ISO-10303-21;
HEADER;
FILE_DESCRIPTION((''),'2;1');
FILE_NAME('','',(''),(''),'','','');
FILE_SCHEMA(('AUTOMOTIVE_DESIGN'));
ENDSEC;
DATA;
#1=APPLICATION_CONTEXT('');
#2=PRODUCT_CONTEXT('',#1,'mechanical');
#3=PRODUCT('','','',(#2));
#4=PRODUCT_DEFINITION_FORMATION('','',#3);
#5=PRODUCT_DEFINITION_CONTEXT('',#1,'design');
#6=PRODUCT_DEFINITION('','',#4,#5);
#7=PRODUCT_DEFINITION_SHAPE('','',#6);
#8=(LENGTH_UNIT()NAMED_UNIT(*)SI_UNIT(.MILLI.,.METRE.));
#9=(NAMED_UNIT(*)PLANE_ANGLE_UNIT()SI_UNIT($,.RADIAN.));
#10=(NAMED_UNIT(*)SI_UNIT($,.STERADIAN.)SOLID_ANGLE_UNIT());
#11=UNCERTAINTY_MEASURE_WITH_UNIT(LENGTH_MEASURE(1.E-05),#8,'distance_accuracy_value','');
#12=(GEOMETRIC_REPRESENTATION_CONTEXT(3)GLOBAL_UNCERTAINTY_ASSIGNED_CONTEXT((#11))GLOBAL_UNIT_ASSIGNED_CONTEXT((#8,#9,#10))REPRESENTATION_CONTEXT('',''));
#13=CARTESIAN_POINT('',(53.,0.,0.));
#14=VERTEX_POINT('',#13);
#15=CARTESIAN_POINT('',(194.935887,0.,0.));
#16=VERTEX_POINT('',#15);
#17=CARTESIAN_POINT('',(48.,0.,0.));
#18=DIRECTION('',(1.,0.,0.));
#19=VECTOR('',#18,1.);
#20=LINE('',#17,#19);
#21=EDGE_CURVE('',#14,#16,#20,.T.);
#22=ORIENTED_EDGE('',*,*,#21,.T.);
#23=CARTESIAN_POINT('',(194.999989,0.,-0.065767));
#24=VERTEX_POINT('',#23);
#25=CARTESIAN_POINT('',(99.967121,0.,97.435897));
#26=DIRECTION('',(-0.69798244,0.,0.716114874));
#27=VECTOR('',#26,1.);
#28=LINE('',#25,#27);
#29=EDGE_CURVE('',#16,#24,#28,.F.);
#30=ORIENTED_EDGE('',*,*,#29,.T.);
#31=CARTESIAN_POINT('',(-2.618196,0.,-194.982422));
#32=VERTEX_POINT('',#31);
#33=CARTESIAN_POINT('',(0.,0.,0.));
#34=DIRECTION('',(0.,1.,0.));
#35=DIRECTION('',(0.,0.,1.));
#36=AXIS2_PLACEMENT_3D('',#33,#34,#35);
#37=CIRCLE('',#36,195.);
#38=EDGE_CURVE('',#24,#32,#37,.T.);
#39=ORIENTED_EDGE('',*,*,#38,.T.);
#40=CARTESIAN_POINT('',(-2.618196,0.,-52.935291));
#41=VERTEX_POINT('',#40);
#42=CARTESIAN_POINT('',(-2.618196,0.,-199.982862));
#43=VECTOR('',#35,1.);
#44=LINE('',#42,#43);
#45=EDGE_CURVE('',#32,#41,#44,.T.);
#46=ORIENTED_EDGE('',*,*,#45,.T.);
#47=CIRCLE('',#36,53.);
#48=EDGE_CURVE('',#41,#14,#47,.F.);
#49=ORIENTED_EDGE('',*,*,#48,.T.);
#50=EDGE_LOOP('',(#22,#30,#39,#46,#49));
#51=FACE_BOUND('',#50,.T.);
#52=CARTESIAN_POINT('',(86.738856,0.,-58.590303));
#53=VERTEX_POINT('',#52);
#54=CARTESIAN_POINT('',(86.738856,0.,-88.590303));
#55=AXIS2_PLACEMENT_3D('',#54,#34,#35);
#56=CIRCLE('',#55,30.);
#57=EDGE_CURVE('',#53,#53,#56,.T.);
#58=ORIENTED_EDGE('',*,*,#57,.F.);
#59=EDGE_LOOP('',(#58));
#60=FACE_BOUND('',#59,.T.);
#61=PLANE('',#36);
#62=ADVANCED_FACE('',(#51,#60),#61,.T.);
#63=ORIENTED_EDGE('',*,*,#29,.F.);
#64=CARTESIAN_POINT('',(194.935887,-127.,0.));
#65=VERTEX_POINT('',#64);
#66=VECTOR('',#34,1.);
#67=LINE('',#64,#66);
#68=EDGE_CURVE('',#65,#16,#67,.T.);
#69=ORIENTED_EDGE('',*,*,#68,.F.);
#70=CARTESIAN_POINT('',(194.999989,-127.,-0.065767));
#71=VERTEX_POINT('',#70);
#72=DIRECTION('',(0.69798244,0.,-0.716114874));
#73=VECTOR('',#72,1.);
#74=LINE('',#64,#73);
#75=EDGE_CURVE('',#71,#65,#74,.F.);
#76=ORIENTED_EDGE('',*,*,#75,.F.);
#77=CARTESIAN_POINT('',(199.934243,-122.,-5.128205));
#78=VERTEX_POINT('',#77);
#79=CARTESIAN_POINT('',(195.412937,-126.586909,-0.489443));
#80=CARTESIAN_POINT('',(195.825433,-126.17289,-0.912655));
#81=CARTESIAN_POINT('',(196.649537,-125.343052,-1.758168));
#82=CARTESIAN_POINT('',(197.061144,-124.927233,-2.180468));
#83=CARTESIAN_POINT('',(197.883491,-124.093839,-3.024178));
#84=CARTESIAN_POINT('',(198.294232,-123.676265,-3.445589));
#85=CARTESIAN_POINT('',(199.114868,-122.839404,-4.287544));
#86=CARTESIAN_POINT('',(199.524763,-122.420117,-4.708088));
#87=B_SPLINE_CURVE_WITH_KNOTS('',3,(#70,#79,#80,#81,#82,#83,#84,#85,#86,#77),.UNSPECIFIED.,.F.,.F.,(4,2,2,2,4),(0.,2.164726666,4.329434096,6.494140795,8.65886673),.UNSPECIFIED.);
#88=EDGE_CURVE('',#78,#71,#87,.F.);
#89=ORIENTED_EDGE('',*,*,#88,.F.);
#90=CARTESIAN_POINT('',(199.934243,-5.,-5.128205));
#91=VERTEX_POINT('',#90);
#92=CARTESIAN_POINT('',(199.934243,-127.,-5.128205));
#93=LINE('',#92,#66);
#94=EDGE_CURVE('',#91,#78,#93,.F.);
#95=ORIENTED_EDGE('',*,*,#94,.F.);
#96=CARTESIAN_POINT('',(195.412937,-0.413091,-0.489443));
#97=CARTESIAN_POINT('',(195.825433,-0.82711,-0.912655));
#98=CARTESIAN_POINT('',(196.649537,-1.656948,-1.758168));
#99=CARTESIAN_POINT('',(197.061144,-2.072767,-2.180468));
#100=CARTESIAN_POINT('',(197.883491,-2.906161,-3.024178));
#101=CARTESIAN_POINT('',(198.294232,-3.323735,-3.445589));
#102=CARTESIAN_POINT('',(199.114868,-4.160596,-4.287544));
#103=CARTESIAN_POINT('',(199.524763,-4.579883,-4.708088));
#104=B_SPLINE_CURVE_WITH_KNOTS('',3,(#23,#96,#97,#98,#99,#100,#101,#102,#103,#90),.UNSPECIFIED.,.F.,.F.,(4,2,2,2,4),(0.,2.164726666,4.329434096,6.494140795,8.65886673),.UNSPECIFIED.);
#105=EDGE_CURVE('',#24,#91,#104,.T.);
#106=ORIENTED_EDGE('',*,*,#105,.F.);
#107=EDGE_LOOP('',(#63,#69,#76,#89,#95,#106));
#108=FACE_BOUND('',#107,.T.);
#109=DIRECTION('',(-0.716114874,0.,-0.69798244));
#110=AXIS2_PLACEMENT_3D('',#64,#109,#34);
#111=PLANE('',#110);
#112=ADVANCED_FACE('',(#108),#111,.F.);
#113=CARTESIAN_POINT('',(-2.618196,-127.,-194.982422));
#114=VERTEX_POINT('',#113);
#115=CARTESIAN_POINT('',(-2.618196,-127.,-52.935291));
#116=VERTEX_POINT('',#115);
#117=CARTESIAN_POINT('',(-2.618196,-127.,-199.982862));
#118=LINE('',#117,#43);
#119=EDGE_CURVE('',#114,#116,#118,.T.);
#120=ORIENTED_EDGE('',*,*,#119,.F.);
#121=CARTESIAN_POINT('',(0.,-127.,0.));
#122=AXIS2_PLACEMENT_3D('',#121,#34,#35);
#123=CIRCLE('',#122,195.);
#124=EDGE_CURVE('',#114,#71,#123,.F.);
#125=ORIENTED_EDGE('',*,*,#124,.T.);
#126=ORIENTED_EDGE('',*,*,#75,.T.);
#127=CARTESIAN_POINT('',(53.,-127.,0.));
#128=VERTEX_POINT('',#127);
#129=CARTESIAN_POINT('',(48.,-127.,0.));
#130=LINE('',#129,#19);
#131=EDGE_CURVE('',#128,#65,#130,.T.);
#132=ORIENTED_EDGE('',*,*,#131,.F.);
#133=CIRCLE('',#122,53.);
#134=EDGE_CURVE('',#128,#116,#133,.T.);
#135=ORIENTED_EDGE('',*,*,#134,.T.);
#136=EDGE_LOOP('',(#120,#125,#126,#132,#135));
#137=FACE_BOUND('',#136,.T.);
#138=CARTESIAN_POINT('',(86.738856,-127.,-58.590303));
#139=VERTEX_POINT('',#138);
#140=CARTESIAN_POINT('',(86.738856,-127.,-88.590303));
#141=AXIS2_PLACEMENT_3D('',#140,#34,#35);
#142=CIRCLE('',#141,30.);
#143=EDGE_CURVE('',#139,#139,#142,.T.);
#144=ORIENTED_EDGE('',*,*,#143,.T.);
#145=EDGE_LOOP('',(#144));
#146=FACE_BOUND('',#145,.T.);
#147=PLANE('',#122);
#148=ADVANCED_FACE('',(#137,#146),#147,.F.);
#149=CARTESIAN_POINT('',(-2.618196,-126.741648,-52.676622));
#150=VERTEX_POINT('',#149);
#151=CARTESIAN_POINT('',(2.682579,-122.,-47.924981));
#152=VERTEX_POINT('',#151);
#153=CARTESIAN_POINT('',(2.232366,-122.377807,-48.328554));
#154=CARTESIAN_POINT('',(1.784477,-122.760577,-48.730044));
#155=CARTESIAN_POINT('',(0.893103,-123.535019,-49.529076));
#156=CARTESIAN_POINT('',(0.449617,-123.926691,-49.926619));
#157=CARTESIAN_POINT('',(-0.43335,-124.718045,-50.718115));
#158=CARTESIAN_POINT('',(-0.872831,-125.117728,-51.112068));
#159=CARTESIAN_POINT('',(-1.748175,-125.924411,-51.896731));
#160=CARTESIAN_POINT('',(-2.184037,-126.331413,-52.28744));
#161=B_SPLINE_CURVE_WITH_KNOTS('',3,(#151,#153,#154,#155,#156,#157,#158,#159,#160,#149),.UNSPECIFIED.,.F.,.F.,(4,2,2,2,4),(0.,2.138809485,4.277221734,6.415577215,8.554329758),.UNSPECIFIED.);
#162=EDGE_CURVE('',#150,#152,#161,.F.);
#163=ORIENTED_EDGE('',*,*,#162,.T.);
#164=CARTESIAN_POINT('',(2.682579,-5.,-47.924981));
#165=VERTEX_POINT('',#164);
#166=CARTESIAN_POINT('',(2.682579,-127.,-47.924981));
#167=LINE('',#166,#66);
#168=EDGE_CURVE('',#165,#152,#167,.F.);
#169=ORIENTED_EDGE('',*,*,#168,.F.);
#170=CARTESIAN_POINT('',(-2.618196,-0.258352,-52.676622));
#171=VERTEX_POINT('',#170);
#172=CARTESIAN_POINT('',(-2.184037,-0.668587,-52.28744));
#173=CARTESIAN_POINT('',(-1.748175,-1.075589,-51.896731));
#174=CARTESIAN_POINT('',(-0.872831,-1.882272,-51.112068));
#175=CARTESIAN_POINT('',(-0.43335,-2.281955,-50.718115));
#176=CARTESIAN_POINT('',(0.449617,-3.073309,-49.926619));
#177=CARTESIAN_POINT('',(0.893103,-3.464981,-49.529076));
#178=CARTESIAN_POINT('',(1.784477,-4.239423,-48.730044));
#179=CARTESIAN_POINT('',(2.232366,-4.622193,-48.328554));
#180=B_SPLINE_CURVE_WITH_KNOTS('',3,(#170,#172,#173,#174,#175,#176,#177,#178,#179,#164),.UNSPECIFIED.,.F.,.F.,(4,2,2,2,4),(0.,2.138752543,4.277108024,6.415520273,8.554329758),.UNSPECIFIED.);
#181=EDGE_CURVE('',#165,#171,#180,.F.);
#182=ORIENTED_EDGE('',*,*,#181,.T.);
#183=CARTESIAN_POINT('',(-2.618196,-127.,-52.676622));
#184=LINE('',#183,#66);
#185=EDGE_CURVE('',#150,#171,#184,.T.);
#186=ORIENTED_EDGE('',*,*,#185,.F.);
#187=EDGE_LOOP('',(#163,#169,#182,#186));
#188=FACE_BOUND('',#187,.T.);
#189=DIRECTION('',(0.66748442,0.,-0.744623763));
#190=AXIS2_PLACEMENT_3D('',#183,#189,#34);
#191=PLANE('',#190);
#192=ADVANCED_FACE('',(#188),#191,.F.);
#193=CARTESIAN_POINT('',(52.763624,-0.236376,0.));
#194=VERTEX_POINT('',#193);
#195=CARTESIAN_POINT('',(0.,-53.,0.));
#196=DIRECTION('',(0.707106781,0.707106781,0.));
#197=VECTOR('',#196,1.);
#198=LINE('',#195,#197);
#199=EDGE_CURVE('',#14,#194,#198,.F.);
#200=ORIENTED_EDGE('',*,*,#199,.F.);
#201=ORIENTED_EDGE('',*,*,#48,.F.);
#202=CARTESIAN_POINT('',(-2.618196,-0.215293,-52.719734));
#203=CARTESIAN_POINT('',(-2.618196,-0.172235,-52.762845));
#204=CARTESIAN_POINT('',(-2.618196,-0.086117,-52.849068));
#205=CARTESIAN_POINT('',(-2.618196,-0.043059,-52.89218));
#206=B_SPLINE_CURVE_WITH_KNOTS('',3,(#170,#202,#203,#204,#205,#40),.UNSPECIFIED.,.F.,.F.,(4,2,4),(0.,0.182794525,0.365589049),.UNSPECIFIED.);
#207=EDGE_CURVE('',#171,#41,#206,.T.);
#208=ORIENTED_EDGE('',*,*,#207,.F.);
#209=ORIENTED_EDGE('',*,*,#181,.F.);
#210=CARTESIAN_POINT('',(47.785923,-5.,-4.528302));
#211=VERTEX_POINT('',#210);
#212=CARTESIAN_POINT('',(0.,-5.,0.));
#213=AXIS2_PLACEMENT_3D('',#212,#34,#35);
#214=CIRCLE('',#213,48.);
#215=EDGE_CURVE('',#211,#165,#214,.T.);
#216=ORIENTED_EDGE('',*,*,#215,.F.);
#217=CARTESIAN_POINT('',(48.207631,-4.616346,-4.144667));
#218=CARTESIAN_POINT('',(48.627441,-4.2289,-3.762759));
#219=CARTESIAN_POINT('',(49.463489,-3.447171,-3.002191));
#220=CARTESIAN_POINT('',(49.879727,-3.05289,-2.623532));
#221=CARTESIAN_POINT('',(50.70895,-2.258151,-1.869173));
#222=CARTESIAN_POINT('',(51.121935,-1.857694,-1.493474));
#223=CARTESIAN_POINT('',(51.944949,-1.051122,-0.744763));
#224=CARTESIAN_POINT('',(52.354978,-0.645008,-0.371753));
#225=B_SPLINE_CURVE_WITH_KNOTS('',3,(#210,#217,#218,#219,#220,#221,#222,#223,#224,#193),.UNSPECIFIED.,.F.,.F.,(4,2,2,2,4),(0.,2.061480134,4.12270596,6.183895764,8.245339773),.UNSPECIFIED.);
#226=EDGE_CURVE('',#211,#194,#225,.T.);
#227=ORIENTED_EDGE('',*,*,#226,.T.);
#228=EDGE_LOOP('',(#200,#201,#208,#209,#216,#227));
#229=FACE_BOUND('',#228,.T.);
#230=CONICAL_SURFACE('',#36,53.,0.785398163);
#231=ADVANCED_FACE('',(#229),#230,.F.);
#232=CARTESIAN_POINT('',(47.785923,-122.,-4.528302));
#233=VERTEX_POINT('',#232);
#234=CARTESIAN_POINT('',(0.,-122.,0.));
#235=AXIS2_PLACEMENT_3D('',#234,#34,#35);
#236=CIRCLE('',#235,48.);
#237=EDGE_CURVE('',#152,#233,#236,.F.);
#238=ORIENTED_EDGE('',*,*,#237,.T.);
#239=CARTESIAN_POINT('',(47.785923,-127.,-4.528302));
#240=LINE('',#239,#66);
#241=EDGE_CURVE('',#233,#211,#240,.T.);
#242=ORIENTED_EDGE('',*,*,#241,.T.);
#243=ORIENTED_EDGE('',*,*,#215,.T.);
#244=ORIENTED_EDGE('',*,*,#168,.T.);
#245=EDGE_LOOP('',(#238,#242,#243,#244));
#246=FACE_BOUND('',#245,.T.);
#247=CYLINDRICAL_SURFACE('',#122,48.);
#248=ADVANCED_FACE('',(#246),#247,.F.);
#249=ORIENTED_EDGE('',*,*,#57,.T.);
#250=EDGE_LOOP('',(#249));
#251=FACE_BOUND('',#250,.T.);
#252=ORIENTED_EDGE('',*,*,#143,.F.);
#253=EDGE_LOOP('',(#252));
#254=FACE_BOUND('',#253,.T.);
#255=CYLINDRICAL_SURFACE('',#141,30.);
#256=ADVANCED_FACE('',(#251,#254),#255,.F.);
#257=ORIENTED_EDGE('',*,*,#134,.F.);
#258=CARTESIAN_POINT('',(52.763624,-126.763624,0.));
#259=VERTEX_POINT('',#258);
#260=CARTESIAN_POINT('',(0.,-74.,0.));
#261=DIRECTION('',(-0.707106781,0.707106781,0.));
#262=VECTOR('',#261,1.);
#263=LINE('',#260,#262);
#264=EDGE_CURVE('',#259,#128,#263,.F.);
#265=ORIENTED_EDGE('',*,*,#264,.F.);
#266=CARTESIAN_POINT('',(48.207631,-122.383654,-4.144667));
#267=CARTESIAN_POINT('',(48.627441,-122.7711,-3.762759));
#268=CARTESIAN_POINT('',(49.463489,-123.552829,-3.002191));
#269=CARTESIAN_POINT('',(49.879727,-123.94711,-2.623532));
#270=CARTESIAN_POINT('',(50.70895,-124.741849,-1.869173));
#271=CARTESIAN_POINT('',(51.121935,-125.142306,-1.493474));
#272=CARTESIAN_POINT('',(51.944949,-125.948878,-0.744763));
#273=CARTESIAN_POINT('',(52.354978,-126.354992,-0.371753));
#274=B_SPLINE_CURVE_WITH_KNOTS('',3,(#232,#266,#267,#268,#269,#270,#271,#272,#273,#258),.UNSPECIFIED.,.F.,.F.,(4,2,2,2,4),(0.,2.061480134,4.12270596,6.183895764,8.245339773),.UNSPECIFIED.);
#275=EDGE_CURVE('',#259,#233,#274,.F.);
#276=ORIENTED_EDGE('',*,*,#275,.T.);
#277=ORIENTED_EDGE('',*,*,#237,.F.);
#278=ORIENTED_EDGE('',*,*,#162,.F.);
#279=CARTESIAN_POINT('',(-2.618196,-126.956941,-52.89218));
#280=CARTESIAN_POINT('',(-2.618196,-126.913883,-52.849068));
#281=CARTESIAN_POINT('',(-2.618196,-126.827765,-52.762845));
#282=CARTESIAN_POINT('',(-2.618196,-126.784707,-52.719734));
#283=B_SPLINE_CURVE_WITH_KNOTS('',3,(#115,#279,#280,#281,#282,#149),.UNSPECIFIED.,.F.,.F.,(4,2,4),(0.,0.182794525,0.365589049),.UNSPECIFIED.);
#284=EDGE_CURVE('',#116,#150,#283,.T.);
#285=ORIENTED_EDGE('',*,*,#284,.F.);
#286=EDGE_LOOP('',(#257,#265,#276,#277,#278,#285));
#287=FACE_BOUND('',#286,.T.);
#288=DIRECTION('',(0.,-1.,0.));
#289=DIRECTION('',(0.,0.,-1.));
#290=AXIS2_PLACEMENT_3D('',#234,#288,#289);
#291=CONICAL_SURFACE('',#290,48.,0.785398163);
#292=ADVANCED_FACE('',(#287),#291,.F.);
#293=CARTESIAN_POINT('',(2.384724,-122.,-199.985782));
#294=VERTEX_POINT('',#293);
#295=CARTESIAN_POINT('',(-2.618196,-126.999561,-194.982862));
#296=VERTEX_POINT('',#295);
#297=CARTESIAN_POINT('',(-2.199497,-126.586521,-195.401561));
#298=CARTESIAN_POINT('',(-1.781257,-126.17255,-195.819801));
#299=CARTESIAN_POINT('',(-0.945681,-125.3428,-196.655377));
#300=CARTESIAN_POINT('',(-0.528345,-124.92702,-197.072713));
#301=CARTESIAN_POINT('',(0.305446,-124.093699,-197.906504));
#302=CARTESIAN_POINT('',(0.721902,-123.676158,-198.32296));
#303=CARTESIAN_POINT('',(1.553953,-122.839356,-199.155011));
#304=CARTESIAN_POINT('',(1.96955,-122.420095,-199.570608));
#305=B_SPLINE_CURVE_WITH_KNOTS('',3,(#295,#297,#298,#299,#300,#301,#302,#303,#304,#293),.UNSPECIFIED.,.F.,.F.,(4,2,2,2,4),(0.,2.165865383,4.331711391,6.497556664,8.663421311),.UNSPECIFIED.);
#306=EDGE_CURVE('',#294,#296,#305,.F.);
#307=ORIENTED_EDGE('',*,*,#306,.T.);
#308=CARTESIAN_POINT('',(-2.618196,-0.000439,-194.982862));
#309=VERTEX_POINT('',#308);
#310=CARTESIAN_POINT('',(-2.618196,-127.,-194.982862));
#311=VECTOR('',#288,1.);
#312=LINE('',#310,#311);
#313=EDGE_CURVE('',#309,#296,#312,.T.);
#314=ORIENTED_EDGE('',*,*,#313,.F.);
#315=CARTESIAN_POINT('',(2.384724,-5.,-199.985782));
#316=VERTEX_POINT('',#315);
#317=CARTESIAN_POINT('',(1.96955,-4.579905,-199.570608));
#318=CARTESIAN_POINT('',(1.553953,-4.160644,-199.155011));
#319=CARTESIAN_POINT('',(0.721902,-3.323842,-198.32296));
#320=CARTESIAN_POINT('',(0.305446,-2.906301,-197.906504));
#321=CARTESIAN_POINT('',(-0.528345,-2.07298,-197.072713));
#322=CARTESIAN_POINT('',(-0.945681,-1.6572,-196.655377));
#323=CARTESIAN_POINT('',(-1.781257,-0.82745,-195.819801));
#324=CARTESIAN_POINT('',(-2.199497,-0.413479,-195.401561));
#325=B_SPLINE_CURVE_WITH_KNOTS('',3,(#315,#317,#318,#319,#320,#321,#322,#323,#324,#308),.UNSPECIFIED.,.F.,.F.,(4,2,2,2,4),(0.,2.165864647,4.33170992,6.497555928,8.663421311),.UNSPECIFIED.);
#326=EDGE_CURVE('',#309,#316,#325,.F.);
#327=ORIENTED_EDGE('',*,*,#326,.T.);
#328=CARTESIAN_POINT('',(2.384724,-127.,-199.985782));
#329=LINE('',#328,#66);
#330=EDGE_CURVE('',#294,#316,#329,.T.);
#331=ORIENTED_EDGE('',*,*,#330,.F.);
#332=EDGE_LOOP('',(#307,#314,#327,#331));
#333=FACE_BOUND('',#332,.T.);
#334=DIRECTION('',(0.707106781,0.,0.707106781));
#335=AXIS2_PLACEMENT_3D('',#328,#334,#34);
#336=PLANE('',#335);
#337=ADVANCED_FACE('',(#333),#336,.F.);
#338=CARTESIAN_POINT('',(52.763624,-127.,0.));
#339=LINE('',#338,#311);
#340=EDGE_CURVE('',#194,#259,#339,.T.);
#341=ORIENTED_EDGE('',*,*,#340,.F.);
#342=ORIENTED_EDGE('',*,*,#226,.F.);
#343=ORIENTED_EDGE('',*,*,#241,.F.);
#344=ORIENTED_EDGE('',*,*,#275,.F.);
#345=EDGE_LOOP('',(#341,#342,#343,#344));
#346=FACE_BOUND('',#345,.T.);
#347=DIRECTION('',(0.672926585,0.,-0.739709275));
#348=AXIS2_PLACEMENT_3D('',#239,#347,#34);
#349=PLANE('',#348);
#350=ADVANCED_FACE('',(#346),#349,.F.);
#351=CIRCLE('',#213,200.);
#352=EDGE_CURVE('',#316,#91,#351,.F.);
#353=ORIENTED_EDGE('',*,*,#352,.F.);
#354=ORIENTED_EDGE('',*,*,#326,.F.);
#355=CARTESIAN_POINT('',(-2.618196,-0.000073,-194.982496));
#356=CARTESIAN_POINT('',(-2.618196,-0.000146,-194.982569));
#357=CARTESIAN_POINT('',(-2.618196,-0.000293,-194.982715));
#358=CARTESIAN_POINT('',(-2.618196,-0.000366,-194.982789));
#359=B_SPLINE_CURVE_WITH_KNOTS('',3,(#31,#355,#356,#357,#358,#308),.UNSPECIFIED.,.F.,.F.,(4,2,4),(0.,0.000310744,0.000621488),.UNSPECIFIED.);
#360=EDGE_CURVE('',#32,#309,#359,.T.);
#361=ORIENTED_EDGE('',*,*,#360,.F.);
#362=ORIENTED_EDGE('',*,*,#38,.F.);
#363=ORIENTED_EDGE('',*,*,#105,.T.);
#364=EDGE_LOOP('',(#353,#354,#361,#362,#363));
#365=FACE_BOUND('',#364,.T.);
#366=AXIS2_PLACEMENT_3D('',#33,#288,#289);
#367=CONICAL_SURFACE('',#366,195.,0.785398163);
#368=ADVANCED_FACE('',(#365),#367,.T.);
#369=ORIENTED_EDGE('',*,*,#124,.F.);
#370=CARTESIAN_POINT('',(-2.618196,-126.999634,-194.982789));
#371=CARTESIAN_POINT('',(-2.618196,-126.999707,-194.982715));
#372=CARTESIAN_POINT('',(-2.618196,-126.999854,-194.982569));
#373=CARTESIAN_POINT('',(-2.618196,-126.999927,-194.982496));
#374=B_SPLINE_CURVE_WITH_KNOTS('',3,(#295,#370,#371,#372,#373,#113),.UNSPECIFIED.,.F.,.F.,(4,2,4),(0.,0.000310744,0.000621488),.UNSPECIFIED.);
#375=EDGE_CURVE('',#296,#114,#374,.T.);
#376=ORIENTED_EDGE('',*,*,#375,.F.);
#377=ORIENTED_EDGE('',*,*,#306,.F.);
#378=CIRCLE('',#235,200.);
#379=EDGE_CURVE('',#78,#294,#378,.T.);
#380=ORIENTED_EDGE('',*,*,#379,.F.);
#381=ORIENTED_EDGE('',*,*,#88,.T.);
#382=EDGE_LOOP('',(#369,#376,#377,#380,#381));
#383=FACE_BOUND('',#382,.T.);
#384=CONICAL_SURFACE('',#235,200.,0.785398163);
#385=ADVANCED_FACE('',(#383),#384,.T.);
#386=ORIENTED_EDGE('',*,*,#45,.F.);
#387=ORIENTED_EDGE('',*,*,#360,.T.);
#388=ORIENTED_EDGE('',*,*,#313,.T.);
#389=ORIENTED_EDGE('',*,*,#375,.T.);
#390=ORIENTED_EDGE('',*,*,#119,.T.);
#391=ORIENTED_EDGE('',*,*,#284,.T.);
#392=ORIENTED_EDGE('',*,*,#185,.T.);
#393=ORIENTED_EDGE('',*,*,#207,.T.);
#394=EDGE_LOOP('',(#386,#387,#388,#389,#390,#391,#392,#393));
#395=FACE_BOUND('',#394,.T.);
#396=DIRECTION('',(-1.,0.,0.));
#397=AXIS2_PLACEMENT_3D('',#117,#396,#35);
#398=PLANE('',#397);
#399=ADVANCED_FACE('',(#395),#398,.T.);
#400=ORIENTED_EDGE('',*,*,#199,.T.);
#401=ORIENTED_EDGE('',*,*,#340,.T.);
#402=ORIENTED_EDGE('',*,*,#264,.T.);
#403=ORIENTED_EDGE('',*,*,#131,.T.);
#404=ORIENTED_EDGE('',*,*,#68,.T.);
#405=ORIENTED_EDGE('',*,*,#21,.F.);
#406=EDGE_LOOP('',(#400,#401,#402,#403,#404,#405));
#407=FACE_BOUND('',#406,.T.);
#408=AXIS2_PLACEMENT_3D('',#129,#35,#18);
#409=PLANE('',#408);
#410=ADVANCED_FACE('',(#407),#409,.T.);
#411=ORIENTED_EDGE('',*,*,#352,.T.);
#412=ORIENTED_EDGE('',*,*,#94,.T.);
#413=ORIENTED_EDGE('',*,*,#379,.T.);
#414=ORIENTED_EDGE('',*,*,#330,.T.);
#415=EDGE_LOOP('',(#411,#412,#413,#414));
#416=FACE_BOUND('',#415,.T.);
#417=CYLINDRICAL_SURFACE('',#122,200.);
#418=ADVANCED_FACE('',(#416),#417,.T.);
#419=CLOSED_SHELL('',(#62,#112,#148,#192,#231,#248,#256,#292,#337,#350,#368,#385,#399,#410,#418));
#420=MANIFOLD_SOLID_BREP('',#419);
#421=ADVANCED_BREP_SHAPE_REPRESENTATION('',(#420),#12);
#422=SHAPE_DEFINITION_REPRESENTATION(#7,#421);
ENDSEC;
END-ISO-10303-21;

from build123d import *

# Parameters (mm, degrees)
BOSS_EXTRUDE1_DEPTH = 127
SKETCH2_R           = 30
CUT_EXTRUDE1_DEPTH  = 311.046770665
CHAMFER2_START      = -127
CHAMFER2_DEPTH      = 127


with BuildPart() as part:
    # Sketch1 → Boss-Extrude1 (new body)
    with BuildSketch(Plane(origin=(0, 0, 0), x_dir=(1, 0, 0), z_dir=(0, 1, 0))):
        with BuildLine():
            Line((48, 0), (200, 0))
            ThreePointArc((200, 0), (140.492634639, 142.344018533), (-2.618196121, 199.982861888))
            Line((-2.618196121, 199.982861888), (-2.618196121, 47.92854107))
            ThreePointArc((-2.618196121, 47.92854107), (33.002474045, 34.854507698), (48, 0))
        make_face()
    extrude(amount=-BOSS_EXTRUDE1_DEPTH)

    # Sketch2 → Cut-Extrude1 (cut, through all)
    with BuildSketch(Plane(origin=(0, 0, 0), x_dir=(1, 0, 0), z_dir=(0, 1, 0))):
        with Locations(Location((86.738855642, 88.590303092, 0), (0, 0, 270))):
            Circle(SKETCH2_R)
    extrude(amount=-CUT_EXTRUDE1_DEPTH, mode=Mode.SUBTRACT)

    # Chamfer2: read off the stored shape, not the designer's step
    # Chamfer2 outline → Chamfer2 (cut)
    with BuildSketch(Plane(origin=(0, 0, 0), x_dir=(1, 0, 0), z_dir=(0, 1, 0)).offset(CHAMFER2_START)):
        with BuildLine():
            ThreePointArc((200, 0), (199.983560067, 2.56431335), (199.93424297, 5.128205128))
            Line((199.93424297, 5.128205128), (194.935886896, 0))
            Line((194.935886896, 0), (200, 0))
        make_face()
        with BuildLine():
            Line((-2.618196121, 194.982861888), (2.384724212, 199.98578222))
            ThreePointArc((2.384724212, 199.98578222), (-0.116745086, 199.999965926), (-2.618196121, 199.982861888))
            Line((-2.618196121, 199.982861888), (-2.618196121, 194.982861888))
        make_face()
        with BuildLine():
            Line((48, 0), (52.763623833, 0))
            Line((52.763623833, 0), (47.785923471, 4.528301887))
            ThreePointArc((47.785923471, 4.528301887), (47.946450998, 2.266679661), (48, 0))
        make_face()
        with BuildLine():
            Line((2.682579438, 47.924980621), (-2.618196121, 52.676622021))
            Line((-2.618196121, 52.676622021), (-2.618196121, 47.92854107))
            ThreePointArc((-2.618196121, 47.92854107), (0.032240845, 47.999989172), (2.682579438, 47.924980621))
        make_face()
    extrude(amount=CHAMFER2_DEPTH, mode=Mode.SUBTRACT)

    # Chamfer2 2 outline → Chamfer2 2 (revolve, cut)
    with BuildSketch(Plane.XY):
        Polygon((200, -122), (195, -127), (200, -127), align=None)
        Polygon((48, -127), (53, -127), (48, -122), align=None)
        Polygon((195, 0), (200, -5), (200, 0), align=None)
        Polygon((48, 0), (48, -5), (53, 0), align=None)
    revolve(axis=Axis((0, 0, 0), (0, 1, 0)), mode=Mode.SUBTRACT)


solid = part.part
